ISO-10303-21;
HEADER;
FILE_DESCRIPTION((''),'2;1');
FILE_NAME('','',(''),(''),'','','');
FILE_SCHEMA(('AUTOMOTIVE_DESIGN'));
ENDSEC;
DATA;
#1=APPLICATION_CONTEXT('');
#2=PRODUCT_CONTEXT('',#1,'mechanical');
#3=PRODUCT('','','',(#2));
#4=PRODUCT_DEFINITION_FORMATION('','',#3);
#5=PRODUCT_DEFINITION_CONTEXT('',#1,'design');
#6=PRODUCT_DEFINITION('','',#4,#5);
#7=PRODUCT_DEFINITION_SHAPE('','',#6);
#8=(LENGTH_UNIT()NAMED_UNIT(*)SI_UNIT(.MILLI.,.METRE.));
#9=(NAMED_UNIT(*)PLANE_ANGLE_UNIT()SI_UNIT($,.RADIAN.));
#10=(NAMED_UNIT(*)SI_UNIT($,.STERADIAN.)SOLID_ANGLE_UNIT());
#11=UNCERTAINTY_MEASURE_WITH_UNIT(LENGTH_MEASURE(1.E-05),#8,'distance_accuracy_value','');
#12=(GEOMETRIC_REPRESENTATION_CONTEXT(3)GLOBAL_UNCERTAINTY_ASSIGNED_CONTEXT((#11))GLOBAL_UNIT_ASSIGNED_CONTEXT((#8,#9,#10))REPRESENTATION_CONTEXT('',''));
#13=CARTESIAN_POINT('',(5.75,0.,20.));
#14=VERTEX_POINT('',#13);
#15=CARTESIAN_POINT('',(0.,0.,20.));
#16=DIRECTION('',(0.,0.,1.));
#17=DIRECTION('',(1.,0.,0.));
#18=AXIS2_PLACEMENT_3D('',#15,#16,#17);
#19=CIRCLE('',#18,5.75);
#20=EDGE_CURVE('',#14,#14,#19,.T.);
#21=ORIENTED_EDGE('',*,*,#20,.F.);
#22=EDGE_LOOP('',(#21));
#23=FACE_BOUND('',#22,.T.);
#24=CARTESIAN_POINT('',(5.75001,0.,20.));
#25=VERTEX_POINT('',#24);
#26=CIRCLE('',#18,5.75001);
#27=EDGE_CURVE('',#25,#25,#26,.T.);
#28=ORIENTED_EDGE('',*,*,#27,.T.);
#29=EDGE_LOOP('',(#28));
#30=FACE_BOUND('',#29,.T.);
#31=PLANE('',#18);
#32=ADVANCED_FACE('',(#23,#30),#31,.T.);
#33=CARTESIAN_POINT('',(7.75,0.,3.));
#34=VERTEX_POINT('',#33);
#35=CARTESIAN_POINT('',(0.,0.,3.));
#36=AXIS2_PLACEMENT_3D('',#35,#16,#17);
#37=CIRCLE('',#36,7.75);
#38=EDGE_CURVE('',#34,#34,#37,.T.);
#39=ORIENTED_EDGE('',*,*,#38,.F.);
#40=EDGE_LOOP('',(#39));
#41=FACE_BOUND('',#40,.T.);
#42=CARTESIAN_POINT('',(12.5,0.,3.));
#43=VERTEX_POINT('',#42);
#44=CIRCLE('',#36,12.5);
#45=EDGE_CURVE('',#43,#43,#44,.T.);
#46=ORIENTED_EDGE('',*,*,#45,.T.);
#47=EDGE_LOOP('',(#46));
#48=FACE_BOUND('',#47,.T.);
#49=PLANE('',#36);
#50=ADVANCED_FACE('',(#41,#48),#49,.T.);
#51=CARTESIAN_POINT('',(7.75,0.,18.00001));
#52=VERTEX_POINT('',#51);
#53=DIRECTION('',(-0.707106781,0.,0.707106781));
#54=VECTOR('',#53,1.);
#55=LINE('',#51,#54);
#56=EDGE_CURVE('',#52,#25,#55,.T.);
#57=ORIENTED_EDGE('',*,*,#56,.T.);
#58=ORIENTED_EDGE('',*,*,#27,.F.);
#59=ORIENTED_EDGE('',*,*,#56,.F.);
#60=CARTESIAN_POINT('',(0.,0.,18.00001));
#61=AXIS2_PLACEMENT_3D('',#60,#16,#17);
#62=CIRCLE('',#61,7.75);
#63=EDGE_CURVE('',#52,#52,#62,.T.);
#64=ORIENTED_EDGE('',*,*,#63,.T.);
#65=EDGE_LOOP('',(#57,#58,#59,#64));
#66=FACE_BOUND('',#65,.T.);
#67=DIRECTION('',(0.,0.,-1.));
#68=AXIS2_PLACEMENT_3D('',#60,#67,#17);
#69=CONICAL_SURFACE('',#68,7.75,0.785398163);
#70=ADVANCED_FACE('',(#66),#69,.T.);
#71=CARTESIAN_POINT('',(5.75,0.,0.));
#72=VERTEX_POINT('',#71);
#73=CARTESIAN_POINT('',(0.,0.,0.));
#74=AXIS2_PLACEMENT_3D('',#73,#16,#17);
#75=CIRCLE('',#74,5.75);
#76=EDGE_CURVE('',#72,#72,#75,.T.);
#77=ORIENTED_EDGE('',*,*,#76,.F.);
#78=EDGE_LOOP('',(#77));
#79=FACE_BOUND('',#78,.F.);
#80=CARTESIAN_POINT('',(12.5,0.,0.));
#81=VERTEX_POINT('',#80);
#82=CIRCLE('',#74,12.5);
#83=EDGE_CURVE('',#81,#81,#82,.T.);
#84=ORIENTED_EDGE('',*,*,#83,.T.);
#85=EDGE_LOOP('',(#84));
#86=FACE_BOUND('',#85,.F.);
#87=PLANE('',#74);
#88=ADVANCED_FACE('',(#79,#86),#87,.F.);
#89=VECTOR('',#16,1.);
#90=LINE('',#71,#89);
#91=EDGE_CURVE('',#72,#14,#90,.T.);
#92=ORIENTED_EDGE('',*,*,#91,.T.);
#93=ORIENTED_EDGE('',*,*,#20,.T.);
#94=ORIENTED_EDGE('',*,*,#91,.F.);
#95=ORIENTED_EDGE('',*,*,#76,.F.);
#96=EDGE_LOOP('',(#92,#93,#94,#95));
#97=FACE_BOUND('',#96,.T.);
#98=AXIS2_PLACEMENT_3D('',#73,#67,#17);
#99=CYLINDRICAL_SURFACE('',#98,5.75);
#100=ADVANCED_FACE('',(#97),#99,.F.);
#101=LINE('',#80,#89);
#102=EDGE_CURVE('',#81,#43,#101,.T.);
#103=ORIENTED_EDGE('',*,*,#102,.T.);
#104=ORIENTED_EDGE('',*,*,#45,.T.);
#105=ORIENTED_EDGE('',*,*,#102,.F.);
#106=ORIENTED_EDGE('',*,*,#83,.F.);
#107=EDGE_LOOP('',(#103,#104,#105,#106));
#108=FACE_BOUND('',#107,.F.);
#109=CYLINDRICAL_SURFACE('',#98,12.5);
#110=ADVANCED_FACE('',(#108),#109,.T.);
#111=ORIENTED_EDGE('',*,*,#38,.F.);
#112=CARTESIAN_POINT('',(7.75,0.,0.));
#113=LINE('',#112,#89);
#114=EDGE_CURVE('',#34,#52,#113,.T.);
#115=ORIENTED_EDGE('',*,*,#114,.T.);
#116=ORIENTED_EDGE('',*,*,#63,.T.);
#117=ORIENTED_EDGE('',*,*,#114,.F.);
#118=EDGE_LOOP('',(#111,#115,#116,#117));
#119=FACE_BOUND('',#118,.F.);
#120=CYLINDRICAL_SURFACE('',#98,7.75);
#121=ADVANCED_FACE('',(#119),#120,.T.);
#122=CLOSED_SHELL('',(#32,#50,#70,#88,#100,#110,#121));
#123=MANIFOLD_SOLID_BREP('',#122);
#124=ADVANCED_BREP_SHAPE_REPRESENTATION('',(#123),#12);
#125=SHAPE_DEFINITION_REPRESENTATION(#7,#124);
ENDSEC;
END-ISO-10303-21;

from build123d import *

# Parameters (mm, degrees)
F0_R     = 7.75
F0_R_2   = 5.75
F1_DEPTH = 20
F2_R     = 12.5
F2_R_2   = 7.75
F3_DEPTH = 3
F4_SIZE  = 1.99999


# Not quite as in the source:
# - a fillet or chamfer is up to 0.001 mm smaller than in the source, because OpenCascade refuses the exact size


with BuildPart() as f1:
    # F0 (on Top) → F1 (new body)
    with BuildSketch(Plane.XY):
        Circle(F0_R)
        Circle(F0_R_2, mode=Mode.SUBTRACT)
    extrude(amount=F1_DEPTH)

    # F2 (on Top) → F3 (join)
    with BuildSketch(Plane.XY):
        Circle(F2_R)
        Circle(F2_R_2, mode=Mode.SUBTRACT)
    extrude(amount=F3_DEPTH)

    # F4 (size 2 in the source; OpenCascade refuses exactly that, so slightly less here)
    f4_edges = [f1.edges().sort_by_distance(p)[0] for p in [
        (-7.75, 0, 20),
    ]]
    chamfer(f4_edges, length=F4_SIZE)


solid = f1.part
